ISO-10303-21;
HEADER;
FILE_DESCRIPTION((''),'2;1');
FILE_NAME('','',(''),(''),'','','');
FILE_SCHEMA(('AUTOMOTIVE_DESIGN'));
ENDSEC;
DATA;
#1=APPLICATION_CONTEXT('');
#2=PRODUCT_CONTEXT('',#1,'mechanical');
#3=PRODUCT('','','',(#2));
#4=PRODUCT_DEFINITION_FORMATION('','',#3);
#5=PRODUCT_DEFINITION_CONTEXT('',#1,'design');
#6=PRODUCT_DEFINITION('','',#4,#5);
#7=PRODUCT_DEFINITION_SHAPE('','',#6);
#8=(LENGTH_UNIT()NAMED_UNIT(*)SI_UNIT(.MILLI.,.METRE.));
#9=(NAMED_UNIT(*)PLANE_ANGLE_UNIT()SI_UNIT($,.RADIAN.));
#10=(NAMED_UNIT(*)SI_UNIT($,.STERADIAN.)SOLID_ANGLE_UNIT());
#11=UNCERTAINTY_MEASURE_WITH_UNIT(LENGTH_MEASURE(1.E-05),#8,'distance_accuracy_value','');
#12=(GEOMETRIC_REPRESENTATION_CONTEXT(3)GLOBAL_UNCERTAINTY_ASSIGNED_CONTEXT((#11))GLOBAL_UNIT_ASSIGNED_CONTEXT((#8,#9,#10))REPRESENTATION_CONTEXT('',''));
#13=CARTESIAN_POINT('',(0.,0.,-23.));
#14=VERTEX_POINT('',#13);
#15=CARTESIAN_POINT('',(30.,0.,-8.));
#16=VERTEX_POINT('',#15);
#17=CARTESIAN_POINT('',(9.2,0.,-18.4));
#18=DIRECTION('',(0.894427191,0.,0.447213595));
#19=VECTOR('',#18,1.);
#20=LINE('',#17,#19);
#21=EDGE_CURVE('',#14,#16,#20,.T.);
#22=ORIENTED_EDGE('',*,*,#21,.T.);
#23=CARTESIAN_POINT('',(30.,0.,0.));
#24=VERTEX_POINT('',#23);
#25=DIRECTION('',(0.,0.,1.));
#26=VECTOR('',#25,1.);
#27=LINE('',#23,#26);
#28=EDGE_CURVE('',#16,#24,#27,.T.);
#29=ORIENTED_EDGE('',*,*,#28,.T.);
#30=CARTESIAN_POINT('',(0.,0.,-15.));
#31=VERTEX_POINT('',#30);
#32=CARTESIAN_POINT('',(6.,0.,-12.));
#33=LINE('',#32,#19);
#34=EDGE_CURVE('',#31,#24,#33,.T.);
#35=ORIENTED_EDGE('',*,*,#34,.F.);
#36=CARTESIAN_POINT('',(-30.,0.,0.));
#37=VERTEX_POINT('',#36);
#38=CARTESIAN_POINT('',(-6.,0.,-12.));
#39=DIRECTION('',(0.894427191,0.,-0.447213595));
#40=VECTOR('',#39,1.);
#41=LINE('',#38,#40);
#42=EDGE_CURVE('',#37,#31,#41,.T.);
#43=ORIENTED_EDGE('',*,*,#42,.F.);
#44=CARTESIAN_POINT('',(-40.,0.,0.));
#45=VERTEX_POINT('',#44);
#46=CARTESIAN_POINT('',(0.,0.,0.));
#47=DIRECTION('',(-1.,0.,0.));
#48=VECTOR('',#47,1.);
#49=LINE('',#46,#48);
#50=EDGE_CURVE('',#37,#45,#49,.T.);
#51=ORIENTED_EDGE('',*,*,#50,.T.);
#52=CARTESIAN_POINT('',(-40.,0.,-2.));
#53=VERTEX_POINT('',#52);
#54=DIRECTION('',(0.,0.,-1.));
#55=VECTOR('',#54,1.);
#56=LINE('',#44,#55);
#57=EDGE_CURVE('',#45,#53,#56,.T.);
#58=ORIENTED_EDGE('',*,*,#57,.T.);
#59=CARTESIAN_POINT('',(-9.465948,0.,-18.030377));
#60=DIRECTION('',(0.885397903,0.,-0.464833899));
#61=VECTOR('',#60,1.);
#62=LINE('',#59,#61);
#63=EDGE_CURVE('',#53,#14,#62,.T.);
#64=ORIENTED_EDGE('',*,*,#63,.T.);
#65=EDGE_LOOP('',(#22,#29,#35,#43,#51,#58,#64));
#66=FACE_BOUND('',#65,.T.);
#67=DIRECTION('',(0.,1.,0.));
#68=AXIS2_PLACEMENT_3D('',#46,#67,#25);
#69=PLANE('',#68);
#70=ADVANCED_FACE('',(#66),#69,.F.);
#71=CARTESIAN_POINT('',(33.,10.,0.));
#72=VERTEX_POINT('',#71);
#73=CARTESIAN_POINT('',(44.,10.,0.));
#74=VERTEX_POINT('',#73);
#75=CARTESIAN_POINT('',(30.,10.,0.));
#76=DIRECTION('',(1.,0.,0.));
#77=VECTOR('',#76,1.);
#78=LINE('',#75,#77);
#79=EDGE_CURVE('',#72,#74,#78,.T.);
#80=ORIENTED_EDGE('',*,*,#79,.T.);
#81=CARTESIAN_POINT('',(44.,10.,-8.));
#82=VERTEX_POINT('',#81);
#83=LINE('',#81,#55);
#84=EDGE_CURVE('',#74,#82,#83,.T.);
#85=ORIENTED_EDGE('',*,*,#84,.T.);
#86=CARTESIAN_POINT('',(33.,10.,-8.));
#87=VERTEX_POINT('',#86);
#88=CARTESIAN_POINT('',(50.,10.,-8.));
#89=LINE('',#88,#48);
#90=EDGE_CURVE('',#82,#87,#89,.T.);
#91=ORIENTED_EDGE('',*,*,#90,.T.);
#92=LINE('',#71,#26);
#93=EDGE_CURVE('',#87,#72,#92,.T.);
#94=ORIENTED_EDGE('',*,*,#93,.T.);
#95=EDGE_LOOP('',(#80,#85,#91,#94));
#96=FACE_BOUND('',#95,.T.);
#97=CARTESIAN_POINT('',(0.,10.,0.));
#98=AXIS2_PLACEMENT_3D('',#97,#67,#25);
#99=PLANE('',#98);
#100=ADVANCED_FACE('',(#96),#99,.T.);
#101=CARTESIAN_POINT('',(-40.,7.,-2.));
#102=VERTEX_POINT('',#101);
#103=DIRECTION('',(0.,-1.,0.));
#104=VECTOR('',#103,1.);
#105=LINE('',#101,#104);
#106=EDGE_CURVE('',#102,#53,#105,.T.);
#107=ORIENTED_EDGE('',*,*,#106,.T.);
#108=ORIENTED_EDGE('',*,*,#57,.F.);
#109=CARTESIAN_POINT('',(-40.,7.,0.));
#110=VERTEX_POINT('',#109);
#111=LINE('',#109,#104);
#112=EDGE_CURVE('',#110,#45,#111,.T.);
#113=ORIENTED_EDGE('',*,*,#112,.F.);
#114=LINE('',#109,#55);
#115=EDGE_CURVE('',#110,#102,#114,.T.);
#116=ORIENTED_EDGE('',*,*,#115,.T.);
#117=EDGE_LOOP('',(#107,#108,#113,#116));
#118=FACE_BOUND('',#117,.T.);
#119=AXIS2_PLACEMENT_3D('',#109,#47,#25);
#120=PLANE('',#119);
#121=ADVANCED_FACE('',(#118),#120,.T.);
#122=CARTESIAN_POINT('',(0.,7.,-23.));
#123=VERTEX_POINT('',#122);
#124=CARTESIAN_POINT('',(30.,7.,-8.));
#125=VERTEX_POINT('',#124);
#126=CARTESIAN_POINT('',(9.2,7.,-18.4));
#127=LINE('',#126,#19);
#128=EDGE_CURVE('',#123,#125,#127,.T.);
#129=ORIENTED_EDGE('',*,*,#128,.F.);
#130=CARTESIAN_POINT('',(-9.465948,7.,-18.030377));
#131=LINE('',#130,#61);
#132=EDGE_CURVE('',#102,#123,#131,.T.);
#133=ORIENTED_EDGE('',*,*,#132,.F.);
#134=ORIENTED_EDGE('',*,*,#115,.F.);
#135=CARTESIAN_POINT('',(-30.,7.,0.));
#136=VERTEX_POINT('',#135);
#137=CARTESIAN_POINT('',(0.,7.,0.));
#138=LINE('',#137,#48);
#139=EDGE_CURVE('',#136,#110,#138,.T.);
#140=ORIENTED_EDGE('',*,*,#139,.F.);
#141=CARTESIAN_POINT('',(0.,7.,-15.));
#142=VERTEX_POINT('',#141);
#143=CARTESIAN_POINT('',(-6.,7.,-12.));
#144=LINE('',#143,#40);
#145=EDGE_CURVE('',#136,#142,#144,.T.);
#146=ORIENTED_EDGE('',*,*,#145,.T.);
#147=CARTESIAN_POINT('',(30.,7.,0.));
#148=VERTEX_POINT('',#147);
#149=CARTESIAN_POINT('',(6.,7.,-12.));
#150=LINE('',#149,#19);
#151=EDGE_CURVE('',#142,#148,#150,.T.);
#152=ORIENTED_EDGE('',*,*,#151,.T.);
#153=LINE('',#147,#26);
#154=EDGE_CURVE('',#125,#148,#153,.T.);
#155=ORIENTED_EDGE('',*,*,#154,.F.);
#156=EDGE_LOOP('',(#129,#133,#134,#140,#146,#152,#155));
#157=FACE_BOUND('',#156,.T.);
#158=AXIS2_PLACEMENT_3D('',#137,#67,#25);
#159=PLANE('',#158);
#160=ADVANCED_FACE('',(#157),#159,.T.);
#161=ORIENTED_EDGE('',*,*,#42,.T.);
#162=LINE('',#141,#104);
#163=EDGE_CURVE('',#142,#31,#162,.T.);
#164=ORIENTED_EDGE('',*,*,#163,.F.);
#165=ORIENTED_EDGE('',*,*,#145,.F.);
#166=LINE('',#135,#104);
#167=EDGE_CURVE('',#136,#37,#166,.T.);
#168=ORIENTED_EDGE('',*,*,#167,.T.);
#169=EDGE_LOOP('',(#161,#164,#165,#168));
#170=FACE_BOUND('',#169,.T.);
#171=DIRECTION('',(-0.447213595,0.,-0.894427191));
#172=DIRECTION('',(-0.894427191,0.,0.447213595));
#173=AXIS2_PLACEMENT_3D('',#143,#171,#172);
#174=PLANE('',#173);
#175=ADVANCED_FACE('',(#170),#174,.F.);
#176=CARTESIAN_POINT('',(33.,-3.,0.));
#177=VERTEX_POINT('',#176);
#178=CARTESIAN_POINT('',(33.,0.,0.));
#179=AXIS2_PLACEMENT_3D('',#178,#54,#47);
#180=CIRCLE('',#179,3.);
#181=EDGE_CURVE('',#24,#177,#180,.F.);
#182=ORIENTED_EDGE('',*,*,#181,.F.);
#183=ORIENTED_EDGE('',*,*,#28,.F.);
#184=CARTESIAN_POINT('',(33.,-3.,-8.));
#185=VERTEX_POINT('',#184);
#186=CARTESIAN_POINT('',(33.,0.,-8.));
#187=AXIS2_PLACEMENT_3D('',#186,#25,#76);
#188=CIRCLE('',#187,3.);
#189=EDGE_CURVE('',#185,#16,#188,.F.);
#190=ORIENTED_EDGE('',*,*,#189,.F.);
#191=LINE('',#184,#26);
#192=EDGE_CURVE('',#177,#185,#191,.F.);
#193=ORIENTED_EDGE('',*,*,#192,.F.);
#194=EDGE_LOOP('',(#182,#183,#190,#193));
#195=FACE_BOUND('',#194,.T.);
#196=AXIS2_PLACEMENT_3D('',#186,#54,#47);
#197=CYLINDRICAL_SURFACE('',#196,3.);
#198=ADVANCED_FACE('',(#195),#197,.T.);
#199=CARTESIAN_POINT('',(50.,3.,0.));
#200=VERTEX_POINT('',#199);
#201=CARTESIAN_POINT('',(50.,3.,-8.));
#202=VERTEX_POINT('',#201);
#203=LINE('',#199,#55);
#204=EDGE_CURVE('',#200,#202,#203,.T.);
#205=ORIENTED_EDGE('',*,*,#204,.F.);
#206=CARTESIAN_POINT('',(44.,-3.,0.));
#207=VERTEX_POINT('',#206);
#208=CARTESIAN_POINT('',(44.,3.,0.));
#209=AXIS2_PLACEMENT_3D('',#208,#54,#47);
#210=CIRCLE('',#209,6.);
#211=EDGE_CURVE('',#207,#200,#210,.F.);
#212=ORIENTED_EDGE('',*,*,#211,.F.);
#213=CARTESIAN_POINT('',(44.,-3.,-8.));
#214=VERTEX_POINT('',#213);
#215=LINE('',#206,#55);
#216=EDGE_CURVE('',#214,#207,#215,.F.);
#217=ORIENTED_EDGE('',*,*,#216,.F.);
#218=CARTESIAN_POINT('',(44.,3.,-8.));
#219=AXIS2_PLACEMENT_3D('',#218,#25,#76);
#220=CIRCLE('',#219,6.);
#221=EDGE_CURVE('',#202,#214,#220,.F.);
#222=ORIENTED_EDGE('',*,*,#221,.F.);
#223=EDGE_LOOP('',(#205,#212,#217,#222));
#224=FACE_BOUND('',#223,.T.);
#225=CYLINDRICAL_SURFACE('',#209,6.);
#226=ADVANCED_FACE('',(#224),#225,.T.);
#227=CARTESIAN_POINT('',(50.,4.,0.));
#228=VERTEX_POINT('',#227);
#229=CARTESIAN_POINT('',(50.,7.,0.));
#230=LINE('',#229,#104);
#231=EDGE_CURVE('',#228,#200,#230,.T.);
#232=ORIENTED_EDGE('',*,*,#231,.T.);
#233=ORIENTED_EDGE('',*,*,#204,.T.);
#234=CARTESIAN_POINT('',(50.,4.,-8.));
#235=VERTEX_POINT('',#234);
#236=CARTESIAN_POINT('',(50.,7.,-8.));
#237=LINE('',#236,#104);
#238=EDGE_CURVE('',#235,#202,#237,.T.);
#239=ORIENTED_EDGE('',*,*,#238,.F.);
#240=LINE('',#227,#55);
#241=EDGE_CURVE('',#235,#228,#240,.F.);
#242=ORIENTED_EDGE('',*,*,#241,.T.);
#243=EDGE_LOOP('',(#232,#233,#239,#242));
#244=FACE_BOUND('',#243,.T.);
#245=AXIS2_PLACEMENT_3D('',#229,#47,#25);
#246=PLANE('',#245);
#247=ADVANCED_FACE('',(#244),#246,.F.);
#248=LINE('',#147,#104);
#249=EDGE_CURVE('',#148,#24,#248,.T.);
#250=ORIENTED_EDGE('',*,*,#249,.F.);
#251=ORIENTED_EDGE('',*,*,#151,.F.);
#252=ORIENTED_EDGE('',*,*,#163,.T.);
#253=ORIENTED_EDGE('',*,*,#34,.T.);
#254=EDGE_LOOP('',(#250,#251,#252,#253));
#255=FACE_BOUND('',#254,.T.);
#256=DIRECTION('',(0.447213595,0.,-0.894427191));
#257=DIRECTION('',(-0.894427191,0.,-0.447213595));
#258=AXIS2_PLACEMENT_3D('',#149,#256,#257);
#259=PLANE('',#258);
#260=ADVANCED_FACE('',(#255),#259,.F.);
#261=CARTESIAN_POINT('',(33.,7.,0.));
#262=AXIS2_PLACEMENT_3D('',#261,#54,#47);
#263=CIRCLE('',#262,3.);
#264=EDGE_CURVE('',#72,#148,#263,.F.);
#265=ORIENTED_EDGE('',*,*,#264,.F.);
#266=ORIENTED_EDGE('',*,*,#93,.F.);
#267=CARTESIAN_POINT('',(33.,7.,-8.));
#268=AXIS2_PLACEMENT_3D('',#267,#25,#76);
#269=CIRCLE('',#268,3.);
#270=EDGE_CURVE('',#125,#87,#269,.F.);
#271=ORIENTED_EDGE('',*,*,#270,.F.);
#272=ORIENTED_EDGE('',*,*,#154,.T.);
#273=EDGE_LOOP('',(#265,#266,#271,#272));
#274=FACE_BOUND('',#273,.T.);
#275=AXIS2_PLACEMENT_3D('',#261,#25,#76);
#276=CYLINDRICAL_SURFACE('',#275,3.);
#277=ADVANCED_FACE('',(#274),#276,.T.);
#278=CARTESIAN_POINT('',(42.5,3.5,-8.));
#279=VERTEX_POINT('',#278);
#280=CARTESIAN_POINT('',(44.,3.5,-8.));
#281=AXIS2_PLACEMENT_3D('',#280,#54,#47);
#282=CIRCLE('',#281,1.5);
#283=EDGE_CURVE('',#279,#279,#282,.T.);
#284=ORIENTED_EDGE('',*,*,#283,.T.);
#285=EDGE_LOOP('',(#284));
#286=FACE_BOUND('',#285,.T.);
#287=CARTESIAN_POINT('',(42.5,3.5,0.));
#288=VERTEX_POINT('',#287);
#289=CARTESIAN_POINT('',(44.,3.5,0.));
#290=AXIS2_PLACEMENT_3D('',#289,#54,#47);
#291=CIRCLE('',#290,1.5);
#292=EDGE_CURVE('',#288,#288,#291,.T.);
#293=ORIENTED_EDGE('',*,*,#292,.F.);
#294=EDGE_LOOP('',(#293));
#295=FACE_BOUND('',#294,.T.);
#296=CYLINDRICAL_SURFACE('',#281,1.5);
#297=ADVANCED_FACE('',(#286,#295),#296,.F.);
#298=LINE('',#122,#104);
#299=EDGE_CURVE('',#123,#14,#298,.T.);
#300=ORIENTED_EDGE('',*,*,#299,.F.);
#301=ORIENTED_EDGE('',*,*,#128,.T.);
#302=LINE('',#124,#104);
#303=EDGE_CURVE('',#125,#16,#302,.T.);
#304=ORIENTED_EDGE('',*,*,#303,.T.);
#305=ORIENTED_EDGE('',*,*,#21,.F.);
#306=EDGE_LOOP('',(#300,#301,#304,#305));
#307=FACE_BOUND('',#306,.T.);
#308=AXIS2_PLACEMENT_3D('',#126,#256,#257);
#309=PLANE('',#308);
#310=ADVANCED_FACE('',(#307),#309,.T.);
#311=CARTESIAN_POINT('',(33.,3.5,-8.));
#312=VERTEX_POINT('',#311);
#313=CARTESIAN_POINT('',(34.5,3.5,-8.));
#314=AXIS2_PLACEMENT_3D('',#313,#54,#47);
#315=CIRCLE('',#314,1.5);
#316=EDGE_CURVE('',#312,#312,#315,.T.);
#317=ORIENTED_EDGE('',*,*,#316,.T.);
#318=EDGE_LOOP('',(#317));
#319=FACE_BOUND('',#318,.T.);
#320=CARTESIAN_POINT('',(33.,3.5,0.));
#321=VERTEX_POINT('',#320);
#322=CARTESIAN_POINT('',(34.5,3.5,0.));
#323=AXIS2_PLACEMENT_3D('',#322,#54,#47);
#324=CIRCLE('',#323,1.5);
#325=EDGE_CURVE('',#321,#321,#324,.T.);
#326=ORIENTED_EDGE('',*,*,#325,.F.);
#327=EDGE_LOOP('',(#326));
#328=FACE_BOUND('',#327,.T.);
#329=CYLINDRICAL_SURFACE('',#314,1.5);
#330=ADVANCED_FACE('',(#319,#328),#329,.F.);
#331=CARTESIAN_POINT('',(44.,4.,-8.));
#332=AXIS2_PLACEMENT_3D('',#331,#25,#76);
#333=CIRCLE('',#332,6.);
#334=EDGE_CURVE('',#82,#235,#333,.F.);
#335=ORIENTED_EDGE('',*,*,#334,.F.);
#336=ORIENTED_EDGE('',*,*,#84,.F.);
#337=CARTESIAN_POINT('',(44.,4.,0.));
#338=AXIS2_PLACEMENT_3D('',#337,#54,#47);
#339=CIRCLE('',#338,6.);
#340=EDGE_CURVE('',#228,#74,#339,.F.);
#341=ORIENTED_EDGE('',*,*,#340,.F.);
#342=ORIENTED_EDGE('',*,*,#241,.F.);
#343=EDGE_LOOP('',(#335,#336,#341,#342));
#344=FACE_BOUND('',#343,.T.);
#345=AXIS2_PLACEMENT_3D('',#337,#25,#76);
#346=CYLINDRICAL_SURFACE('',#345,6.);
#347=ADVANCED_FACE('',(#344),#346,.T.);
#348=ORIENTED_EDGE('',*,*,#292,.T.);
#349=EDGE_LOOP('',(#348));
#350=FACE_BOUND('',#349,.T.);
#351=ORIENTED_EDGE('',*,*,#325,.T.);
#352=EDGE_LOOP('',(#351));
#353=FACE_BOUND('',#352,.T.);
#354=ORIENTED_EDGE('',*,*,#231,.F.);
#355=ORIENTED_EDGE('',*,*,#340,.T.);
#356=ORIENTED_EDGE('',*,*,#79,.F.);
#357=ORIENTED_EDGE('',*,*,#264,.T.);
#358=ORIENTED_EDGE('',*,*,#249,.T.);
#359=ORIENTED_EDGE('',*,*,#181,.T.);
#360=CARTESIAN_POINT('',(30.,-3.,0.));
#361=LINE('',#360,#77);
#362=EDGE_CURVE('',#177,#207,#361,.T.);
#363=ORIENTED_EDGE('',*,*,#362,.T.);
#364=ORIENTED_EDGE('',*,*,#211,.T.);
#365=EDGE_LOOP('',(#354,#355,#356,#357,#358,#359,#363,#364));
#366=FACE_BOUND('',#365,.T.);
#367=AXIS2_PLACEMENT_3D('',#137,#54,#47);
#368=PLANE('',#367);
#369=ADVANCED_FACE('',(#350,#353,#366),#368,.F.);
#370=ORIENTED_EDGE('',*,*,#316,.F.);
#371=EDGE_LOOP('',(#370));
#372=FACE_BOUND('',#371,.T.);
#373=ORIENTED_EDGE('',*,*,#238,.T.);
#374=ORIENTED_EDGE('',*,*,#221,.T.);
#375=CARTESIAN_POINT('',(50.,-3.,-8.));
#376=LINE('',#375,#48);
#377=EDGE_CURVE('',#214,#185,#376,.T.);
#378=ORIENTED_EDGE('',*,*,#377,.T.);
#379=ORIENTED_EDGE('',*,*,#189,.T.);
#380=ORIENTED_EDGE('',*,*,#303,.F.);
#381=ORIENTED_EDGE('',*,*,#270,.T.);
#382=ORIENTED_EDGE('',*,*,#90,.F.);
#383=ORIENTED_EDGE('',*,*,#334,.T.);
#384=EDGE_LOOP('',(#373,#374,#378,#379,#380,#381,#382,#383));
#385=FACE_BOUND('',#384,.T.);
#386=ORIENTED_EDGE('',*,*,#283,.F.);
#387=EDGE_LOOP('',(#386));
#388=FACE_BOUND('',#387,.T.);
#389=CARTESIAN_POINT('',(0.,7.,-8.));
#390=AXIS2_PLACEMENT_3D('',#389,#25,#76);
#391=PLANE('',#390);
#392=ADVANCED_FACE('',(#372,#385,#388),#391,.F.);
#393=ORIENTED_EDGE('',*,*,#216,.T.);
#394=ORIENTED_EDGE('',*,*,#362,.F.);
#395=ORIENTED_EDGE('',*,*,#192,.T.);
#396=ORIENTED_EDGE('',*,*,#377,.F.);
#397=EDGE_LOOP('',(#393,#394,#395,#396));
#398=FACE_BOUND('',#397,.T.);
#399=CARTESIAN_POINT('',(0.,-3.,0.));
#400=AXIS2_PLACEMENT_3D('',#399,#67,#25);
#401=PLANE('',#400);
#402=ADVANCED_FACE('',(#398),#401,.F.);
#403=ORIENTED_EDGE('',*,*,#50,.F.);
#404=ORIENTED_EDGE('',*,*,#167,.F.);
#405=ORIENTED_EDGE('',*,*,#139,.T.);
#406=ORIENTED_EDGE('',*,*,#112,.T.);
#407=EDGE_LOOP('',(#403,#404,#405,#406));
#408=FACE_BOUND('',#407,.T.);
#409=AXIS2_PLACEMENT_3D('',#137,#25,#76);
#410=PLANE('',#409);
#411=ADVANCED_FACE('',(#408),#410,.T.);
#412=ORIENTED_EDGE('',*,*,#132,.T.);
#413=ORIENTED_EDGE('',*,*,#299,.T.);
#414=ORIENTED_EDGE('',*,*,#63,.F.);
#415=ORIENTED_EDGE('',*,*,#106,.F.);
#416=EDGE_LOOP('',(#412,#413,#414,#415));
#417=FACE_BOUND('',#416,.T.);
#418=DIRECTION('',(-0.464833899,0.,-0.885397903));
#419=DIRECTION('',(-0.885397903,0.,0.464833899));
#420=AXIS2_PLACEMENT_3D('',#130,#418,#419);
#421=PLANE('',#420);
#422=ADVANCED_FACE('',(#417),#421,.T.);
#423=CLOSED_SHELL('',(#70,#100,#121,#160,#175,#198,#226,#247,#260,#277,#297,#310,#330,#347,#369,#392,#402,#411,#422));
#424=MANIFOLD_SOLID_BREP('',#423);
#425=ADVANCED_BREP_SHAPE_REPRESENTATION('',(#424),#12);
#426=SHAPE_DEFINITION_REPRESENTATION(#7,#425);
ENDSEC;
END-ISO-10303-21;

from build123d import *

# Parameters (mm, degrees)
BOSS_EXTRUDE1_DEPTH      = 7
BOSS_EXTRUDE2_DEPTH      = 3
BOSS_EXTRUDE2_DEPTH_BACK = 10
SKETCH2_W                = 20
SKETCH2_H                = 8
FILLET1_R                = 6
FILLET2_R                = 3
F_3_0_3_DIAMETER_HOLE1_D = 3


with BuildPart() as part:
    # Sketch1 → Boss-Extrude1 (new body)
    with BuildSketch(Plane(origin=(0, 0, 0), x_dir=(1, 0, 0), z_dir=(0, 1, 0))):
        Polygon((50, 0), (50, 8), (30, 8), (0, 23), (-40, 2), (-40, 0), (-30, 0), (0, 15), (30, 0), align=None)
    extrude(amount=BOSS_EXTRUDE1_DEPTH)

    # Sketch2 → Boss-Extrude2 (add, two sides: drawn at the far end of the back side and taken through both)
    with BuildSketch(Plane(origin=(0, 7, 0), x_dir=(1, 0, 0), z_dir=(0, 1, 0)).offset(-BOSS_EXTRUDE2_DEPTH_BACK)):
        with Locations((40, 4)):
            Rectangle(SKETCH2_W, SKETCH2_H)
    extrude(amount=BOSS_EXTRUDE2_DEPTH + BOSS_EXTRUDE2_DEPTH_BACK)

    # Fillet1
    fillet1_edges = [part.edges().sort_by_distance(p)[0] for p in [
        (50, -3, -4),
        (50, 10, -4),
    ]]
    fillet(fillet1_edges, radius=FILLET1_R)

    # Fillet2
    fillet2_edges = [part.edges().sort_by_distance(p)[0] for p in [
        (30, -3, -4),
        (30, 10, -4),
    ]]
    fillet(fillet2_edges, radius=FILLET2_R - 0.0001)  # a hair under: the kernel refuses the full size

    # Ø3.0 (3) Diameter Hole1 (through all)
    with Locations(Plane(origin=(0, 0, -8), x_dir=(-1, 0, 0), z_dir=(0, 0, -1))):
        with Locations((-44, 3.5), (-34.5, 3.5)):
            Hole(F_3_0_3_DIAMETER_HOLE1_D / 2)


solid = part.part
